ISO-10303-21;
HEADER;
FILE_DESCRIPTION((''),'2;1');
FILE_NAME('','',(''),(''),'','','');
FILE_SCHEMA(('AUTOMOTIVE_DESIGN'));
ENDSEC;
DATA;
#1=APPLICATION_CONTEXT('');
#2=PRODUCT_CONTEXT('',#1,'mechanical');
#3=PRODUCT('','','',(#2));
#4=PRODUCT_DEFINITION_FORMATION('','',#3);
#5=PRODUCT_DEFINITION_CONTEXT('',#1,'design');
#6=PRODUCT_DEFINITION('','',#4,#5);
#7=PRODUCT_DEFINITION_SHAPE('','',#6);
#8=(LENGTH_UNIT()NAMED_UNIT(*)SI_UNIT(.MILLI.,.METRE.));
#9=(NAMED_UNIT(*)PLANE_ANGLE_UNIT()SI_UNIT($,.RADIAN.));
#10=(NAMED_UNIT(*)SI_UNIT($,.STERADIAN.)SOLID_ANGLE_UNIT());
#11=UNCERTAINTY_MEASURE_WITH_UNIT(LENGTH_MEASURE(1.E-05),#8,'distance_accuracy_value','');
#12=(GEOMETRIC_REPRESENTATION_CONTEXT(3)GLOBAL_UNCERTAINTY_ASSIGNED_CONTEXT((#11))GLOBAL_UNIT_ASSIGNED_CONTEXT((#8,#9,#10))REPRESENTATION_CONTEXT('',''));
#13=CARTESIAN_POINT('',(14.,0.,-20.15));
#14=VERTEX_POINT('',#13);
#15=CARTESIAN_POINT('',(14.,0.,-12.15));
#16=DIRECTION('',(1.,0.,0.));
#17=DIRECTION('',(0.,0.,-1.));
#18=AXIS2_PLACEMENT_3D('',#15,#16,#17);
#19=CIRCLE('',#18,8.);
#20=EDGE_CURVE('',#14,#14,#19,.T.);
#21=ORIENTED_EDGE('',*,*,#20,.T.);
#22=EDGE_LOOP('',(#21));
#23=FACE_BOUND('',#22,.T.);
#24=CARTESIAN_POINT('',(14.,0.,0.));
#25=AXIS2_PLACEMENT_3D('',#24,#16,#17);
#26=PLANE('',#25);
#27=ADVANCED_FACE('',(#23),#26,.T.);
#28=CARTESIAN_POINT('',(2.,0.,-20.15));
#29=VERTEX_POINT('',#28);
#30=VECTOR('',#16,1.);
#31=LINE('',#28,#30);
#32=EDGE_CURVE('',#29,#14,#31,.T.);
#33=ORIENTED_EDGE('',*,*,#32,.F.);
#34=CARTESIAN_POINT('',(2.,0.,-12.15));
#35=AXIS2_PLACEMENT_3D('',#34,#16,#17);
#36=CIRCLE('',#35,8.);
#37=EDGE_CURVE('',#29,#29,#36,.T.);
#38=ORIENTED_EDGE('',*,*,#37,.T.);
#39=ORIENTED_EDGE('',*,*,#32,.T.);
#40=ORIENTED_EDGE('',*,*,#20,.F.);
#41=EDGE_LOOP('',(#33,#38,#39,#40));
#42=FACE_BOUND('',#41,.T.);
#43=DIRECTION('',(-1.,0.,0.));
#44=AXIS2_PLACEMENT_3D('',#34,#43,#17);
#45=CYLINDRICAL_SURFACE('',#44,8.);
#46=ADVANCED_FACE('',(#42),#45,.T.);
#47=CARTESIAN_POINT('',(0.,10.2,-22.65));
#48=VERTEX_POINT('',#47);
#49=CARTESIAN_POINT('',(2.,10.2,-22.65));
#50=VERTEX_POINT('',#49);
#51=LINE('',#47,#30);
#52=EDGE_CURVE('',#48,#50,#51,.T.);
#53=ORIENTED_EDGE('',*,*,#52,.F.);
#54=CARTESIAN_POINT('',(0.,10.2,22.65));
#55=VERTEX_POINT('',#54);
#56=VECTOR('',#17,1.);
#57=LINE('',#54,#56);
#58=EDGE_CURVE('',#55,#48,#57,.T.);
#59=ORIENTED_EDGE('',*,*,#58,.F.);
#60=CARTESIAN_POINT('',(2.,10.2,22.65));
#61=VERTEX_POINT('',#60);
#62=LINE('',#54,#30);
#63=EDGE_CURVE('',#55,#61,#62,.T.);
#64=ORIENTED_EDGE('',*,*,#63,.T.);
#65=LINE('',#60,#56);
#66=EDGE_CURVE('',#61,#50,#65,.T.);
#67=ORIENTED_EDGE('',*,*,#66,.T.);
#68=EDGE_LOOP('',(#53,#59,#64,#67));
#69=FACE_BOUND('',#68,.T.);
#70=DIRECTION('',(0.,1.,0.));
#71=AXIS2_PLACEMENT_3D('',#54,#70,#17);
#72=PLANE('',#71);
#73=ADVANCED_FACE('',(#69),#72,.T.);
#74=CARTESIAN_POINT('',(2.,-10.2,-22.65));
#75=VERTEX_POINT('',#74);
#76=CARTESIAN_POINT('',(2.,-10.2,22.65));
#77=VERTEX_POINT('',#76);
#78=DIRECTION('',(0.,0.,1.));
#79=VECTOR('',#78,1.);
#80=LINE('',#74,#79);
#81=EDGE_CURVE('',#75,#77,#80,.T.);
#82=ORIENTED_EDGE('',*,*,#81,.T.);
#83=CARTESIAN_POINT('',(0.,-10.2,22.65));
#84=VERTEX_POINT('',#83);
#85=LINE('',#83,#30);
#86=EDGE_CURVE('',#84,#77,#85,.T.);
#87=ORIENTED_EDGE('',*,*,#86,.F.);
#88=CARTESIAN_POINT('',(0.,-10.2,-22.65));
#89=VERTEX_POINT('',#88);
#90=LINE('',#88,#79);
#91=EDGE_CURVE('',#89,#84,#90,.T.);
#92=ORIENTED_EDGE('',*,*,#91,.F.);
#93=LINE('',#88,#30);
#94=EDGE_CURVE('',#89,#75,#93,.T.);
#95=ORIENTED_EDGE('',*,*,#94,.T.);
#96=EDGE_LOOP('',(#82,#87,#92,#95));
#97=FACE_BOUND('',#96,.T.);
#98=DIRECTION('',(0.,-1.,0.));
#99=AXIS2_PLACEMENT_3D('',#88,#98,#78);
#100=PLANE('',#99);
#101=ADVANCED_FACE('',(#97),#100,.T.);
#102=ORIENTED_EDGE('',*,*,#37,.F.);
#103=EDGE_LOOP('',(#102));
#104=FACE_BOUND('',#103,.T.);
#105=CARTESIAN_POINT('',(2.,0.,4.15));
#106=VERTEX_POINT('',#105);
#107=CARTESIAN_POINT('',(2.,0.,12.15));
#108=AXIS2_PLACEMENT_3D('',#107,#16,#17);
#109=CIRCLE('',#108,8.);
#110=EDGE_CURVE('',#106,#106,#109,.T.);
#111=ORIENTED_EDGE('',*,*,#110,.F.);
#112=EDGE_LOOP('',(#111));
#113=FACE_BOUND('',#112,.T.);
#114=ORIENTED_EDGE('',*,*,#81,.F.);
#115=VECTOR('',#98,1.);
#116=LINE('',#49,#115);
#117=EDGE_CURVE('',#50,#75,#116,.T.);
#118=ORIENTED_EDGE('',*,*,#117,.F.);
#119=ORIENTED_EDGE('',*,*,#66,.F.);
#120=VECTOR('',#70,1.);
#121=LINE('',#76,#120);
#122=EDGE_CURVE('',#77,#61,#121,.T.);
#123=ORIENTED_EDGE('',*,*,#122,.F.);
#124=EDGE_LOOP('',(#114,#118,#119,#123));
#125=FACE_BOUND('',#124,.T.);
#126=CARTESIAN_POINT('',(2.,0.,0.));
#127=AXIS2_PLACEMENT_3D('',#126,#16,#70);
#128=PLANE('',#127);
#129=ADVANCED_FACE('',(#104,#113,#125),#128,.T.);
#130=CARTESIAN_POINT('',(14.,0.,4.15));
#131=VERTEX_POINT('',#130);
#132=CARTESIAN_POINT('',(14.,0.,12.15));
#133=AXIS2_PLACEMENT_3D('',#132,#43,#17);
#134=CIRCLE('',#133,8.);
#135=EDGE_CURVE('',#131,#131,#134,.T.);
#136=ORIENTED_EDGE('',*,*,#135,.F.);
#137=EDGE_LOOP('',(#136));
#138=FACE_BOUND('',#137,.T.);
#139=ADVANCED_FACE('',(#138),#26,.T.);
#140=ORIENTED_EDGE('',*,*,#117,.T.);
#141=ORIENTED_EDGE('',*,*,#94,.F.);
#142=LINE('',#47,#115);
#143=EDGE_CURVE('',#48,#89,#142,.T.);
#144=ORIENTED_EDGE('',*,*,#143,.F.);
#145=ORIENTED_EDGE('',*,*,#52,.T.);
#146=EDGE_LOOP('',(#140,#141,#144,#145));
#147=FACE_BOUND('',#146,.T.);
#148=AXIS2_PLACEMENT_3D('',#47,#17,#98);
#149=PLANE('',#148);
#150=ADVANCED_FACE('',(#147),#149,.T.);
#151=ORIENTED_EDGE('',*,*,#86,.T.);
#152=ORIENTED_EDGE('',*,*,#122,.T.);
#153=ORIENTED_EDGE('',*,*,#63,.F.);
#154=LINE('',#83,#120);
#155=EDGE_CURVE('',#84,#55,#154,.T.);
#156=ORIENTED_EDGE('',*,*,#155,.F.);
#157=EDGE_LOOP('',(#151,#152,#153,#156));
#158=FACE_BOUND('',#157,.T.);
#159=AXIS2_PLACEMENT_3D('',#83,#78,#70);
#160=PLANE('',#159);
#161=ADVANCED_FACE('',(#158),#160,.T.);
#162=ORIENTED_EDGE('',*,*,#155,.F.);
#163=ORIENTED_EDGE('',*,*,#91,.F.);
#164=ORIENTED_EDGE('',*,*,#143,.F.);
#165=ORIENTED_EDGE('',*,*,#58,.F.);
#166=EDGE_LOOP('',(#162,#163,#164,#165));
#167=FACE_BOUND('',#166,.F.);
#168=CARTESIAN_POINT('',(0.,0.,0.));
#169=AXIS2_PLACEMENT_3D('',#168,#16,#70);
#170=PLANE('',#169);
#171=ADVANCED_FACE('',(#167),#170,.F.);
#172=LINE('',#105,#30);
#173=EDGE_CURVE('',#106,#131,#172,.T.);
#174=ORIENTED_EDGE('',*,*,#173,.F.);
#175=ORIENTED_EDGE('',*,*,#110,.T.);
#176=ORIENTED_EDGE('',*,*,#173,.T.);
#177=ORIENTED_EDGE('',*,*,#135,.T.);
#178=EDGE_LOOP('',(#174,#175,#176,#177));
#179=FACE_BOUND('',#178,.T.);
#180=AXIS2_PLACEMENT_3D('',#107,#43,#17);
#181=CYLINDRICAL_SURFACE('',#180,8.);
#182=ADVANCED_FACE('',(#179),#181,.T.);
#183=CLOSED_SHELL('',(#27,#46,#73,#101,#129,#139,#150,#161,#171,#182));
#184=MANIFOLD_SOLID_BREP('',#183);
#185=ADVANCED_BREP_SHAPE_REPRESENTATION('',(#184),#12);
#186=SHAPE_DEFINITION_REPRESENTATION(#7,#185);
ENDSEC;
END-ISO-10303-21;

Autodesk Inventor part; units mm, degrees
ref_plane "YZ Plane" through (0, 0, 0) normal (1, 0, 0) x (0, 1, 0)
ref_plane "XZ Plane" through (0, 0, 0) normal (0, 1, 0) x (-1, 0, 0)
ref_plane "XY Plane" through (0, 0, 0) normal (0, 0, 1) x (1, 0, 0)
sketch "Sketch1" plane through (0, 0, 0) normal (1, 0, 0) x (0, 1, 0)
  line L0 (-20.4, 45.3) -> (20.4, 45.3)
  line L1 (20.4, 45.3) -> (20.4, -45.3)
  line L2 (20.4, -45.3) -> (-20.4, -45.3)
  line L3 (-20.4, -45.3) -> (-20.4, 45.3)
  line L4 (-20.4, 45.3) -> (20.4, -45.3) construction
  line L5 (20.4, 45.3) -> (-20.4, -45.3) construction
  point P0 (0, 0)
  dimension "d0" = 40.8
  dimension "d1" = 90.6
extrude "Extrusion1" add sketch "Sketch1" along normal blind 4
sketch "Sketch2" plane through (4, 0, 0) normal (1, 0, 0) x (0, 0, -1)
  circle A0 centre (-24.3, 0) radius 16
  line L0 (-45.3, 20.4) -> (-45.3, -20.4) projected
  line L1 (-45.3, 0) -> (-40.3, 0)
  line L2 (-45.3, 0) -> (-41.0258, 0)
  line L3 (45.3, 20.4) -> (-45.3, 20.4) projected
  line L4 (-45.3, -20.4) -> (45.3, -20.4) projected
  circle A1 centre (24.3, 0) radius 16
  dimension "d4" = 32
extrude "Extrusion2" add sketch "Sketch2" along normal blind 24
sketch "Sketch3" plane through (4, 0, 0) normal (1, 0, 0) x (0, 0, -1)
  line L0 (-45.3, 20.4) -> (-45.3, -20.4) projected
  line L1 (-45.3, -20.4) -> (45.3, -20.4) projected
  line L2 (-45.3, 20.4) -> (45.3, -20.4)
  line L3 (45.3, -20.4) -> (45.3, 20.4) projected
  line L4 (-45.3, -20.4) -> (45.3, 20.4)
  circle A0 centre (0, 0) radius 5
  line L5 (0, 0) -> (0, -27.8597)
  dimension "d9" = 10
sketch "Sketch4" plane through (0, 0, 0) normal (-1, 0, 0) x (0, 0, 1)
  line L0 (-45.3, -20.4) -> (-45.3, 20.4) projected
  line L1 (45.3, 20.4) -> (45.3, -20.4) projected
  line L2 (-45.3, 20.4) -> (45.3, 20.4)
  line L3 (45.3, 20.4) -> (45.3, -20.4)
  line L4 (45.3, -20.4) -> (-45.3, -20.4)
  line L5 (-45.3, -20.4) -> (-45.3, 20.4)
  point P0 (0, 0)
scale "Scale1" factors (0.5, 0.5, 0.5) then translate (0, 0, 0) bodies 1
properties part number "Ultrasound" material "PET Plastic"
